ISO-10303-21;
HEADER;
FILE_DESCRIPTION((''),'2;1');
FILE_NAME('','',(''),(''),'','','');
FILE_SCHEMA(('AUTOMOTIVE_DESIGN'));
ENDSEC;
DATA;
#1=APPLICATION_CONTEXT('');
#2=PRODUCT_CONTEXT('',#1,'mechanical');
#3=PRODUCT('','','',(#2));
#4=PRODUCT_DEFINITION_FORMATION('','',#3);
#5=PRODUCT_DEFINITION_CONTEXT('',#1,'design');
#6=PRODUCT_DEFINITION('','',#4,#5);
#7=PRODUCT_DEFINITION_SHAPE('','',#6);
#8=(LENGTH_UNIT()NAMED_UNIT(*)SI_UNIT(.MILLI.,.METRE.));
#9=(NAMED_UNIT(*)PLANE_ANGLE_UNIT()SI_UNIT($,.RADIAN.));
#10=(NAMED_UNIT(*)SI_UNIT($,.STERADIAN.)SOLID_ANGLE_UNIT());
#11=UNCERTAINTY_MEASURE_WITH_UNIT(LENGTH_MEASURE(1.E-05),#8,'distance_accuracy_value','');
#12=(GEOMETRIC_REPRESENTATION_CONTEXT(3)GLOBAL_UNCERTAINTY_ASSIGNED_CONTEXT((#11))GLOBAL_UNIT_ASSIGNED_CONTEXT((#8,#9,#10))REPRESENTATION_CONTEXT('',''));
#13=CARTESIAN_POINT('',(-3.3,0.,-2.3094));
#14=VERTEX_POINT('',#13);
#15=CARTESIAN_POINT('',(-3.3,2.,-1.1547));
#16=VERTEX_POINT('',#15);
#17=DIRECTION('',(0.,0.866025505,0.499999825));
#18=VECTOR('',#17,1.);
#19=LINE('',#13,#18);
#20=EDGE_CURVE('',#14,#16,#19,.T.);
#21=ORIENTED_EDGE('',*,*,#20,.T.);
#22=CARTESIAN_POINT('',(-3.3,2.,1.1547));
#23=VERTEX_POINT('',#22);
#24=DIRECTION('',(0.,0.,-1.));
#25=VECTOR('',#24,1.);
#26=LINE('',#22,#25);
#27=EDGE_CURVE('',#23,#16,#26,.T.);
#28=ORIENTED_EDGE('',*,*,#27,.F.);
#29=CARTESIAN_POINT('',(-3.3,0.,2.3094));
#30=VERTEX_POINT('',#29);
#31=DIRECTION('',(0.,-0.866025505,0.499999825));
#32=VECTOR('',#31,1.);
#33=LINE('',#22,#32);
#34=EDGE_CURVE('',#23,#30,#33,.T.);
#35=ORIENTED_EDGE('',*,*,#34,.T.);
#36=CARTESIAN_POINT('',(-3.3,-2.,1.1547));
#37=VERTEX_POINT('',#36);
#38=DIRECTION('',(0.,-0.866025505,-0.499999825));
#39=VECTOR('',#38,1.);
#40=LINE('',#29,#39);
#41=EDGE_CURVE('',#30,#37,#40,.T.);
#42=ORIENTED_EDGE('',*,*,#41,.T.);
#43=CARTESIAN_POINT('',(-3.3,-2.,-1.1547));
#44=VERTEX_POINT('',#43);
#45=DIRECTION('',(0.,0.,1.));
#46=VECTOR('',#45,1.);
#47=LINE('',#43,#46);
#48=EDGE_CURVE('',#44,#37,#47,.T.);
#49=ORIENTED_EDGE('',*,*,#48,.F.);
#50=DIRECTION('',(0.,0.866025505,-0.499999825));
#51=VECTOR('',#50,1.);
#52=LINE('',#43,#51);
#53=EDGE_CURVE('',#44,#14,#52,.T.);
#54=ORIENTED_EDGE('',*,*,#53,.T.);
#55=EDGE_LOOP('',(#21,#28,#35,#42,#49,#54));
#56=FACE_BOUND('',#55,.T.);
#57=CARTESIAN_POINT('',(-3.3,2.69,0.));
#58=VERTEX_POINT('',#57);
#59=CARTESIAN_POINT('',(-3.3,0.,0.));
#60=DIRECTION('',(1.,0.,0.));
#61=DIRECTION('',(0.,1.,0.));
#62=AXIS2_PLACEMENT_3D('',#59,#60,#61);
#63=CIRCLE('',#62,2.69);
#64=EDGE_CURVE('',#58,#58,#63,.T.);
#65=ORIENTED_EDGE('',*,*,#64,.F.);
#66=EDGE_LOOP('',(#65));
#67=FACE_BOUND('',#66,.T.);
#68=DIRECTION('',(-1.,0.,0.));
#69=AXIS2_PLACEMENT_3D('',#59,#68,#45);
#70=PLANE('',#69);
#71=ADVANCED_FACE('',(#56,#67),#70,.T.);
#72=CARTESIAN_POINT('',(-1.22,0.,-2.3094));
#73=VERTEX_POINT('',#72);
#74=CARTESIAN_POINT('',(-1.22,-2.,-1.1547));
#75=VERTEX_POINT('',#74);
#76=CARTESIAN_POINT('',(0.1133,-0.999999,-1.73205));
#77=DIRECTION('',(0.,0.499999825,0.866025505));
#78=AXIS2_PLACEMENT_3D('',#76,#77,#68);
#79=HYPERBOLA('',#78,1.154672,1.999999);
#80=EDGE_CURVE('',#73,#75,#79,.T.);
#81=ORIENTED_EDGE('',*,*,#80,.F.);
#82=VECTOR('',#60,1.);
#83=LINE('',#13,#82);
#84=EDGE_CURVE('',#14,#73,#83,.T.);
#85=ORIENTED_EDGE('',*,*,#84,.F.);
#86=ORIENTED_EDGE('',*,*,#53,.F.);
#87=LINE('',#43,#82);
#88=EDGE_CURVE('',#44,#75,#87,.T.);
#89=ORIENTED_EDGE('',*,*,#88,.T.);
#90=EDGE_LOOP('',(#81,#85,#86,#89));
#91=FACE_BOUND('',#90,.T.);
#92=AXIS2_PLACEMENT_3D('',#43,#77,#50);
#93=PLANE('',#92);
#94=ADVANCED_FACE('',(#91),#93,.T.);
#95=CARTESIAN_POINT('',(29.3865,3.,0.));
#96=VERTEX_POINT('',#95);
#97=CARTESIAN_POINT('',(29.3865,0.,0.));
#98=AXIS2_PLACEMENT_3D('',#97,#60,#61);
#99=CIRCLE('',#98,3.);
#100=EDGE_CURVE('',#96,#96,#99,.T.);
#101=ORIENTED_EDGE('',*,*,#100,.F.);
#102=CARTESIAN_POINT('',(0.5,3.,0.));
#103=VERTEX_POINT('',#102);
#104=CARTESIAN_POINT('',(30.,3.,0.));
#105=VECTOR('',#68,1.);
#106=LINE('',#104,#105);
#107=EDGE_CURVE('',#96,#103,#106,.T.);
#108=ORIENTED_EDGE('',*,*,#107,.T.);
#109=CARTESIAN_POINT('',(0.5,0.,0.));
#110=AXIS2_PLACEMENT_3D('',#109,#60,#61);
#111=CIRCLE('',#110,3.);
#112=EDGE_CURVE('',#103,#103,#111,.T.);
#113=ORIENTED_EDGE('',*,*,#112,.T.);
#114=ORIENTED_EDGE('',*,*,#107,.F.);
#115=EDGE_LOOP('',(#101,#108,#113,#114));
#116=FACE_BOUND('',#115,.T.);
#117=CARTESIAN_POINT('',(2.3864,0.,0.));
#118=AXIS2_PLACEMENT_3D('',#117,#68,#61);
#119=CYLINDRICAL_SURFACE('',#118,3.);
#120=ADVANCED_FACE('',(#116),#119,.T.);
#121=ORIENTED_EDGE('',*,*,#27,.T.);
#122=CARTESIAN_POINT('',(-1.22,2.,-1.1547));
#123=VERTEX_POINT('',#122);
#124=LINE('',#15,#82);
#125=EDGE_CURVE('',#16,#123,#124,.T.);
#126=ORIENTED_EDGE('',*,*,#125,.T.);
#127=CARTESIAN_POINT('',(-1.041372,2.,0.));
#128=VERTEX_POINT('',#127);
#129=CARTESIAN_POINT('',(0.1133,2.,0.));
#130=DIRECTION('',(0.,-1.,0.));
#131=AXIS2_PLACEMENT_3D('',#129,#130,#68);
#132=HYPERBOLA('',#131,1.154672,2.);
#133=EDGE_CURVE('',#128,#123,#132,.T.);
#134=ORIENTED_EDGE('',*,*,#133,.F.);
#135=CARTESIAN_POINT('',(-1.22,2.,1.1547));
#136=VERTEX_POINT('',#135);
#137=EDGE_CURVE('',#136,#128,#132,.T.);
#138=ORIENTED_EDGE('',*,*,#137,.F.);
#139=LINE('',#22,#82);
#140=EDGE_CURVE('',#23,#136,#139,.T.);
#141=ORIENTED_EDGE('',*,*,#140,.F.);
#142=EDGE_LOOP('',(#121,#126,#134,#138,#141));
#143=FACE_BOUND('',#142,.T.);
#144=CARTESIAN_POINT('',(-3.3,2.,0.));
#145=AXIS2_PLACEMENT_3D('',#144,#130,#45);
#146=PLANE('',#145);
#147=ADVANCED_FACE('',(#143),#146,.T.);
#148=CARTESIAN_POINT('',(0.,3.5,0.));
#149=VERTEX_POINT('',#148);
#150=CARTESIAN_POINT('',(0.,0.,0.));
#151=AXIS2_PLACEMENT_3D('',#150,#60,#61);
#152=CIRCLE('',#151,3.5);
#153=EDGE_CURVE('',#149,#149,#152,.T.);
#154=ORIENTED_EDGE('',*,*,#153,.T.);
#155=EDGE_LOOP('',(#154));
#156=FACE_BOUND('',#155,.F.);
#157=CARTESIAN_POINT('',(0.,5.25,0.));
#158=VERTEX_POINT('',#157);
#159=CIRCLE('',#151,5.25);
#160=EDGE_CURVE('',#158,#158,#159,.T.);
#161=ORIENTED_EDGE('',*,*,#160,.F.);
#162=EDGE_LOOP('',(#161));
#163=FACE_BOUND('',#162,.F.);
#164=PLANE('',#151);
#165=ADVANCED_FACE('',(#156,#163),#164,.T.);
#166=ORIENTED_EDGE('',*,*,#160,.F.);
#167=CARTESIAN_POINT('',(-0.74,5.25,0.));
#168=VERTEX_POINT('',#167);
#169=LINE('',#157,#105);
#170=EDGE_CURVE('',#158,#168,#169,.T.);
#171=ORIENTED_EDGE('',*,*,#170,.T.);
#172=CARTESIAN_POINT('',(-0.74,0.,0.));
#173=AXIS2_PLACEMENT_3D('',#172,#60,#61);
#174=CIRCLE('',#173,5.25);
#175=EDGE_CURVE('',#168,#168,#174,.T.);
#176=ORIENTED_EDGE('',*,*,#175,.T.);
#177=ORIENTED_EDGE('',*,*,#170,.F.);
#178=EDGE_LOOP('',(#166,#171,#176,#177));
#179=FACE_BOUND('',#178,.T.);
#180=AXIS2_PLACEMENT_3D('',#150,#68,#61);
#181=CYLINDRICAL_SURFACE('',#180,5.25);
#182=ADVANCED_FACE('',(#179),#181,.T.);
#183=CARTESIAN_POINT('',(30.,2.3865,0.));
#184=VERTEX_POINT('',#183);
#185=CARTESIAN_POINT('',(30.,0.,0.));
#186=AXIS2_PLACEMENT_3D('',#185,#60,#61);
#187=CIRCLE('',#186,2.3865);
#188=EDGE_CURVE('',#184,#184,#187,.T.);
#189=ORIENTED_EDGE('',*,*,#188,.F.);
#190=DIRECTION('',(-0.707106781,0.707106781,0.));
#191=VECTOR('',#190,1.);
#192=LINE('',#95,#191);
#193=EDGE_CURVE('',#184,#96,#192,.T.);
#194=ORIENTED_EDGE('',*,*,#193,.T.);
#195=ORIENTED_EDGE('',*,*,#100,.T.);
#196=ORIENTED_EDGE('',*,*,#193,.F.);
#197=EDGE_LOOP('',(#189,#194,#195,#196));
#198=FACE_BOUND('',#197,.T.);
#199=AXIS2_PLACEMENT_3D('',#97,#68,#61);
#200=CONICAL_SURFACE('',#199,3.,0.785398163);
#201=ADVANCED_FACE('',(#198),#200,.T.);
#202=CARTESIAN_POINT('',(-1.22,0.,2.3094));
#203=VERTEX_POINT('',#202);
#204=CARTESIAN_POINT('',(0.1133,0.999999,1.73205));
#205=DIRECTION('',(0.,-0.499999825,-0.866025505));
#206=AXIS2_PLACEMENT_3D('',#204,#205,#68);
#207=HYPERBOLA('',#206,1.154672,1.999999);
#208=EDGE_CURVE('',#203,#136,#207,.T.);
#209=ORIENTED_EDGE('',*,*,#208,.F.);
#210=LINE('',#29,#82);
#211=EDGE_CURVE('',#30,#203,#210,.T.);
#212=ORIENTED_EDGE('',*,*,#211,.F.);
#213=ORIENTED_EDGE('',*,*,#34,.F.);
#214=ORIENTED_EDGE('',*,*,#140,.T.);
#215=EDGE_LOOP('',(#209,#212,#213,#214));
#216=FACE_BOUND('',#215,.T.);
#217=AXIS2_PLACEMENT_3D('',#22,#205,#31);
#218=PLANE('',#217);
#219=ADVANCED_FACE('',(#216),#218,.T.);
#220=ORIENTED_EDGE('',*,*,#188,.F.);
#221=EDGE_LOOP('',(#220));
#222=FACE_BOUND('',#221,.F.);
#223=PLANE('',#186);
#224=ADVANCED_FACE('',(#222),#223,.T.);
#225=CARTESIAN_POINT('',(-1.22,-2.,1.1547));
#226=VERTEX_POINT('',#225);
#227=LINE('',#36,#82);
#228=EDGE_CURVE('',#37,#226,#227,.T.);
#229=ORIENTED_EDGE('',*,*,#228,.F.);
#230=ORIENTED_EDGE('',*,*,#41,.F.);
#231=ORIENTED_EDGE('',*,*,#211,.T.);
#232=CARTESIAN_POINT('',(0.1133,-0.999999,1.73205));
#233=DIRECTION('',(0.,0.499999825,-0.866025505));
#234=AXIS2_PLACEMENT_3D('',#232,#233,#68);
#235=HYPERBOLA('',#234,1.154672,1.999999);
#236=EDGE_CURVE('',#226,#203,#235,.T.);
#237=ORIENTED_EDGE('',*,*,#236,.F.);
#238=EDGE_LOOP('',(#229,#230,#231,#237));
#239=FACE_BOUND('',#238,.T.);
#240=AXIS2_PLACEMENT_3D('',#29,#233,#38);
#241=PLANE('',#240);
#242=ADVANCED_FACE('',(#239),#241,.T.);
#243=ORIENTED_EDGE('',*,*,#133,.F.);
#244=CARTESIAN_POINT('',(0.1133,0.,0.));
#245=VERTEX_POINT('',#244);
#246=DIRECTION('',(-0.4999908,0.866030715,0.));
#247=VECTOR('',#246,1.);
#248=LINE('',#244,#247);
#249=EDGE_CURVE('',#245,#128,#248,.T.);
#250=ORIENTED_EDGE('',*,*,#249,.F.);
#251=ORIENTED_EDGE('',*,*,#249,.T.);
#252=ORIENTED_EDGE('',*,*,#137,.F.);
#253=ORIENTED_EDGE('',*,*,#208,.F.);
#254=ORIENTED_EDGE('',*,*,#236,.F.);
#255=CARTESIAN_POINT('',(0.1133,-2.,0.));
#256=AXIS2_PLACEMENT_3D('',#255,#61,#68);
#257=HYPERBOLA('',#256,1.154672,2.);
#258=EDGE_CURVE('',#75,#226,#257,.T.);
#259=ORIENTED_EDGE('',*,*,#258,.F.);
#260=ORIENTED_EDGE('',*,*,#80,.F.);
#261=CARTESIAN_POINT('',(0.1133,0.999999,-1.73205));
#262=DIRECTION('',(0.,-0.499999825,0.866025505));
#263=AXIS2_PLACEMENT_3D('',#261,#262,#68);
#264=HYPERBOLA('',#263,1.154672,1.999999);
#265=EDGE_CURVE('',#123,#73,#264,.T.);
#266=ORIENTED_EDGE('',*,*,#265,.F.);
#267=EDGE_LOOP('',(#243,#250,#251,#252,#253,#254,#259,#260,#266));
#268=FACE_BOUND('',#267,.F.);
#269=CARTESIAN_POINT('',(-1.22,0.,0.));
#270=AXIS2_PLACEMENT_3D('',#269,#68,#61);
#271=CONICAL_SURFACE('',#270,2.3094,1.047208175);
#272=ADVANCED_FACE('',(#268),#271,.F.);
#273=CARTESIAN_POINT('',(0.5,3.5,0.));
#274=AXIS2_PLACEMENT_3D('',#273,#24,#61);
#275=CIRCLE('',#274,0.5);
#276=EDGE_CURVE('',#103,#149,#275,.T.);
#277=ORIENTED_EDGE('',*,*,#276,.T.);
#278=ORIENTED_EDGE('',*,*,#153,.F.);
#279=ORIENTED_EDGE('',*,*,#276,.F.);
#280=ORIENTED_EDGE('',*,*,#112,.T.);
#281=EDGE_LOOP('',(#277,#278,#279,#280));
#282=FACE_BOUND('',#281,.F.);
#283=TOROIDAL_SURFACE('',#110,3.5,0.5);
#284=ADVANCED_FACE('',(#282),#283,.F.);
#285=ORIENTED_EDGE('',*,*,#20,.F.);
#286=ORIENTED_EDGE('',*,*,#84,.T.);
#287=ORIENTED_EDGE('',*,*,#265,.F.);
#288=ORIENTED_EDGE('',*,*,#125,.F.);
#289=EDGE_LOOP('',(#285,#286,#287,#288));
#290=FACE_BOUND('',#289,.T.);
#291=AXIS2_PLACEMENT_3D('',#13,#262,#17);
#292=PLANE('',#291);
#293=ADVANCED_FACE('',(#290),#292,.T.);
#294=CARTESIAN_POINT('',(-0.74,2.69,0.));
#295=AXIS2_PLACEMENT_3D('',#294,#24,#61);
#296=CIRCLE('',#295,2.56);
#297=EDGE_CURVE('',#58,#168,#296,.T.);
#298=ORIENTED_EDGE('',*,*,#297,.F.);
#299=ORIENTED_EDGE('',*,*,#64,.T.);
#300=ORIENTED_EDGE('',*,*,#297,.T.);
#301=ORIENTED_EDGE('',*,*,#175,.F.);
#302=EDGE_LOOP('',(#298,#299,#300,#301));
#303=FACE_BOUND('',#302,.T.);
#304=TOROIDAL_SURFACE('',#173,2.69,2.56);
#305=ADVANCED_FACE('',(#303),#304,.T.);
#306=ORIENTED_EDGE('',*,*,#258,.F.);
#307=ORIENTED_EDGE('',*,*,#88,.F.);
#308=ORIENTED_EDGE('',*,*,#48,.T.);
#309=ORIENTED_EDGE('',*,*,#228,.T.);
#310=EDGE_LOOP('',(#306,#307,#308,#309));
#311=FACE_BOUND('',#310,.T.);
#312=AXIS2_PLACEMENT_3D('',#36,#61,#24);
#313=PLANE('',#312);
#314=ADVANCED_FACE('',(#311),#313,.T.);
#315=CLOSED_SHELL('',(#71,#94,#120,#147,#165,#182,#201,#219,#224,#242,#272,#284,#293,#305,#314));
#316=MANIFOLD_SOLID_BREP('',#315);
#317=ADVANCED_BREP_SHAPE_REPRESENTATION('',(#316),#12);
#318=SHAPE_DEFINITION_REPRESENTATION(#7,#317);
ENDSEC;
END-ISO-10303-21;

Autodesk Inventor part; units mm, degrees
ref_plane "YZ Plane" through (0, 0, 0) normal (1, 0, 0) x (0, 1, 0)
ref_plane "XZ Plane" through (0, 0, 0) normal (0, 1, 0) x (-1, 0, 0)
sketch "Эскиз1" plane through (0, 0, 0) normal (0, 0, 1) x (1, 0, 0)
  line L0 (0.1133, 0) -> (30, 0)
  line L1 (30, 0) -> (30, 3)
  line L2 (30, 3) -> (3, 3)
  line L3 (3, 3) -> (2.3864, 3)
  line L4 (2.3864, 3) -> (0, 3)
  line L5 (0, 3) -> (0, 5.25)
  line L6 (0, 5.25) -> (-3.3, 5.25)
  line L7 (-3.3, 5.25) -> (-3.3, 2.3094)
  line L8 (-3.3, 2.3094) -> (-1.22, 2.3094)
  line L9 (-1.22, 2.3094) -> (0.1133, 0)
  line L10 (-9.96, 0) -> (36.66, 0) projected
  line L11 (0, -1.05) -> (0, 6.3) projected
  line L12 (3, 3) -> (0, 3) construction
  dimension "d1" = 27
  dimension "d2" = 0.6136
  dimension "d3" = 3.3
  dimension "d4" = 2.08
  dimension "d5" = 60
  dimension "d6" = 6
  dimension "d7" = 6
  dimension "d8" = 4.6188
  dimension "d9" = 10.5
  dimension "d26" = 30
revolve "Базовый элемент" add sketch "Эскиз1" angle 360 about axis through (0.1133, 0, 0) along (1, 0, 0) contours L9 L11 L4 L3 L2 L1 L0 | L9 L8 L7 L6 L5 L11
sketch "Эскиз2" plane through (-3.3, 0, 0) normal (-1, 0, 0) x (0, 0, 1)
  circle A0 centre (0, 0) radius 2.3094 projected
  line L0 (0, -7.35) -> (0, 7.35) projected
  line L1 (-7.35, 0) -> (7.35, 0) projected
  line L2 (2.3094, 0) -> (1.1547, -2)
  line L3 (1.1547, -2) -> (-1.1547, -2)
  line L4 (-1.1547, -2) -> (-2.3094, 0)
  line L5 (-2.3094, 0) -> (-1.1547, 2)
  line L6 (-1.1547, 2) -> (1.1547, 2)
  line L7 (1.1547, 2) -> (2.3094, 0)
extrude "Паз" add sketch "Эскиз2" against normal up to next contours L7 A0 | A0 L2 | L6 L0 A0 | A0 L0 L3 | L0 L6 A0 | A0 L3 L0 | L4 A0 | A0 L5
fillet "Сопряжение1" radius 2.56 1 edges at (-3.3, -5.25, 0)
thread "Резьба" size "M6x1" class "6g" standard "ISO Metric profile" length 27
chamfer "Фаска1" distance 0.6135 distance2 0.6135 1 edges at (30, -3, 0) measured on face at (30, -0.301, -1.1526)
ref_plane "Work Plane1" through (29, 0, 0) normal (0, -1, 0) x (1, 0, 0)
fillet "Сопряжение2" radius 0.5 1 edges at (0, -3, 0)
equation "\"d17\" = RR"
equation "\"d13\" = GEL"
equation "\"d15\" = -0.5 * SPD + 0.5 * GD"
equation "\"d16\" = GUL"
equation "\"d30\" = R"
equation "\"d1\" = GEL"
equation "\"d3\" = KOH"
equation "\"d4\" = INTI"
equation "\"d6\" = GD"
equation "\"d7\" = BDM"
equation "\"d8\" = 1.1547 * SW"
equation "\"d9\" = KOD"
equation "\"d26\" = NLG"
equation "\"GD\" = NND"
equation "\"NLG\" = 30"
equation "\"GEL\" = 27"
equation "\"KOD\" = 10.5"
equation "\"KOH\" = 3.3"
equation "\"INTI\" = 2.08"
equation "\"GAL\" = 0.61345 * PTC"
equation "\"GUL\" = 0.61345 * PTC"
equation "\"BDM\" = NND"
equation "\"SW\" = 4"
equation "\"RR\" = 2.56"
equation "\"SPD\" = NND - 1.2269 * PTC"
equation "\"R\" = 0.5"
equation "\"TOA\" = 30deg"
equation "\"GD1\" = THREADDIA - 1.2269 * PTC"
equation "\"THREADDIA\" = 6"
equation "\"PTC\" = 1"
equation "\"NND\" = 6"
equation "\"KOH1\" = 0.74"
equation "\"E0\" = 4.583"
properties part number "ISO 7380-1 - M6 x 30" material "Сталь"
